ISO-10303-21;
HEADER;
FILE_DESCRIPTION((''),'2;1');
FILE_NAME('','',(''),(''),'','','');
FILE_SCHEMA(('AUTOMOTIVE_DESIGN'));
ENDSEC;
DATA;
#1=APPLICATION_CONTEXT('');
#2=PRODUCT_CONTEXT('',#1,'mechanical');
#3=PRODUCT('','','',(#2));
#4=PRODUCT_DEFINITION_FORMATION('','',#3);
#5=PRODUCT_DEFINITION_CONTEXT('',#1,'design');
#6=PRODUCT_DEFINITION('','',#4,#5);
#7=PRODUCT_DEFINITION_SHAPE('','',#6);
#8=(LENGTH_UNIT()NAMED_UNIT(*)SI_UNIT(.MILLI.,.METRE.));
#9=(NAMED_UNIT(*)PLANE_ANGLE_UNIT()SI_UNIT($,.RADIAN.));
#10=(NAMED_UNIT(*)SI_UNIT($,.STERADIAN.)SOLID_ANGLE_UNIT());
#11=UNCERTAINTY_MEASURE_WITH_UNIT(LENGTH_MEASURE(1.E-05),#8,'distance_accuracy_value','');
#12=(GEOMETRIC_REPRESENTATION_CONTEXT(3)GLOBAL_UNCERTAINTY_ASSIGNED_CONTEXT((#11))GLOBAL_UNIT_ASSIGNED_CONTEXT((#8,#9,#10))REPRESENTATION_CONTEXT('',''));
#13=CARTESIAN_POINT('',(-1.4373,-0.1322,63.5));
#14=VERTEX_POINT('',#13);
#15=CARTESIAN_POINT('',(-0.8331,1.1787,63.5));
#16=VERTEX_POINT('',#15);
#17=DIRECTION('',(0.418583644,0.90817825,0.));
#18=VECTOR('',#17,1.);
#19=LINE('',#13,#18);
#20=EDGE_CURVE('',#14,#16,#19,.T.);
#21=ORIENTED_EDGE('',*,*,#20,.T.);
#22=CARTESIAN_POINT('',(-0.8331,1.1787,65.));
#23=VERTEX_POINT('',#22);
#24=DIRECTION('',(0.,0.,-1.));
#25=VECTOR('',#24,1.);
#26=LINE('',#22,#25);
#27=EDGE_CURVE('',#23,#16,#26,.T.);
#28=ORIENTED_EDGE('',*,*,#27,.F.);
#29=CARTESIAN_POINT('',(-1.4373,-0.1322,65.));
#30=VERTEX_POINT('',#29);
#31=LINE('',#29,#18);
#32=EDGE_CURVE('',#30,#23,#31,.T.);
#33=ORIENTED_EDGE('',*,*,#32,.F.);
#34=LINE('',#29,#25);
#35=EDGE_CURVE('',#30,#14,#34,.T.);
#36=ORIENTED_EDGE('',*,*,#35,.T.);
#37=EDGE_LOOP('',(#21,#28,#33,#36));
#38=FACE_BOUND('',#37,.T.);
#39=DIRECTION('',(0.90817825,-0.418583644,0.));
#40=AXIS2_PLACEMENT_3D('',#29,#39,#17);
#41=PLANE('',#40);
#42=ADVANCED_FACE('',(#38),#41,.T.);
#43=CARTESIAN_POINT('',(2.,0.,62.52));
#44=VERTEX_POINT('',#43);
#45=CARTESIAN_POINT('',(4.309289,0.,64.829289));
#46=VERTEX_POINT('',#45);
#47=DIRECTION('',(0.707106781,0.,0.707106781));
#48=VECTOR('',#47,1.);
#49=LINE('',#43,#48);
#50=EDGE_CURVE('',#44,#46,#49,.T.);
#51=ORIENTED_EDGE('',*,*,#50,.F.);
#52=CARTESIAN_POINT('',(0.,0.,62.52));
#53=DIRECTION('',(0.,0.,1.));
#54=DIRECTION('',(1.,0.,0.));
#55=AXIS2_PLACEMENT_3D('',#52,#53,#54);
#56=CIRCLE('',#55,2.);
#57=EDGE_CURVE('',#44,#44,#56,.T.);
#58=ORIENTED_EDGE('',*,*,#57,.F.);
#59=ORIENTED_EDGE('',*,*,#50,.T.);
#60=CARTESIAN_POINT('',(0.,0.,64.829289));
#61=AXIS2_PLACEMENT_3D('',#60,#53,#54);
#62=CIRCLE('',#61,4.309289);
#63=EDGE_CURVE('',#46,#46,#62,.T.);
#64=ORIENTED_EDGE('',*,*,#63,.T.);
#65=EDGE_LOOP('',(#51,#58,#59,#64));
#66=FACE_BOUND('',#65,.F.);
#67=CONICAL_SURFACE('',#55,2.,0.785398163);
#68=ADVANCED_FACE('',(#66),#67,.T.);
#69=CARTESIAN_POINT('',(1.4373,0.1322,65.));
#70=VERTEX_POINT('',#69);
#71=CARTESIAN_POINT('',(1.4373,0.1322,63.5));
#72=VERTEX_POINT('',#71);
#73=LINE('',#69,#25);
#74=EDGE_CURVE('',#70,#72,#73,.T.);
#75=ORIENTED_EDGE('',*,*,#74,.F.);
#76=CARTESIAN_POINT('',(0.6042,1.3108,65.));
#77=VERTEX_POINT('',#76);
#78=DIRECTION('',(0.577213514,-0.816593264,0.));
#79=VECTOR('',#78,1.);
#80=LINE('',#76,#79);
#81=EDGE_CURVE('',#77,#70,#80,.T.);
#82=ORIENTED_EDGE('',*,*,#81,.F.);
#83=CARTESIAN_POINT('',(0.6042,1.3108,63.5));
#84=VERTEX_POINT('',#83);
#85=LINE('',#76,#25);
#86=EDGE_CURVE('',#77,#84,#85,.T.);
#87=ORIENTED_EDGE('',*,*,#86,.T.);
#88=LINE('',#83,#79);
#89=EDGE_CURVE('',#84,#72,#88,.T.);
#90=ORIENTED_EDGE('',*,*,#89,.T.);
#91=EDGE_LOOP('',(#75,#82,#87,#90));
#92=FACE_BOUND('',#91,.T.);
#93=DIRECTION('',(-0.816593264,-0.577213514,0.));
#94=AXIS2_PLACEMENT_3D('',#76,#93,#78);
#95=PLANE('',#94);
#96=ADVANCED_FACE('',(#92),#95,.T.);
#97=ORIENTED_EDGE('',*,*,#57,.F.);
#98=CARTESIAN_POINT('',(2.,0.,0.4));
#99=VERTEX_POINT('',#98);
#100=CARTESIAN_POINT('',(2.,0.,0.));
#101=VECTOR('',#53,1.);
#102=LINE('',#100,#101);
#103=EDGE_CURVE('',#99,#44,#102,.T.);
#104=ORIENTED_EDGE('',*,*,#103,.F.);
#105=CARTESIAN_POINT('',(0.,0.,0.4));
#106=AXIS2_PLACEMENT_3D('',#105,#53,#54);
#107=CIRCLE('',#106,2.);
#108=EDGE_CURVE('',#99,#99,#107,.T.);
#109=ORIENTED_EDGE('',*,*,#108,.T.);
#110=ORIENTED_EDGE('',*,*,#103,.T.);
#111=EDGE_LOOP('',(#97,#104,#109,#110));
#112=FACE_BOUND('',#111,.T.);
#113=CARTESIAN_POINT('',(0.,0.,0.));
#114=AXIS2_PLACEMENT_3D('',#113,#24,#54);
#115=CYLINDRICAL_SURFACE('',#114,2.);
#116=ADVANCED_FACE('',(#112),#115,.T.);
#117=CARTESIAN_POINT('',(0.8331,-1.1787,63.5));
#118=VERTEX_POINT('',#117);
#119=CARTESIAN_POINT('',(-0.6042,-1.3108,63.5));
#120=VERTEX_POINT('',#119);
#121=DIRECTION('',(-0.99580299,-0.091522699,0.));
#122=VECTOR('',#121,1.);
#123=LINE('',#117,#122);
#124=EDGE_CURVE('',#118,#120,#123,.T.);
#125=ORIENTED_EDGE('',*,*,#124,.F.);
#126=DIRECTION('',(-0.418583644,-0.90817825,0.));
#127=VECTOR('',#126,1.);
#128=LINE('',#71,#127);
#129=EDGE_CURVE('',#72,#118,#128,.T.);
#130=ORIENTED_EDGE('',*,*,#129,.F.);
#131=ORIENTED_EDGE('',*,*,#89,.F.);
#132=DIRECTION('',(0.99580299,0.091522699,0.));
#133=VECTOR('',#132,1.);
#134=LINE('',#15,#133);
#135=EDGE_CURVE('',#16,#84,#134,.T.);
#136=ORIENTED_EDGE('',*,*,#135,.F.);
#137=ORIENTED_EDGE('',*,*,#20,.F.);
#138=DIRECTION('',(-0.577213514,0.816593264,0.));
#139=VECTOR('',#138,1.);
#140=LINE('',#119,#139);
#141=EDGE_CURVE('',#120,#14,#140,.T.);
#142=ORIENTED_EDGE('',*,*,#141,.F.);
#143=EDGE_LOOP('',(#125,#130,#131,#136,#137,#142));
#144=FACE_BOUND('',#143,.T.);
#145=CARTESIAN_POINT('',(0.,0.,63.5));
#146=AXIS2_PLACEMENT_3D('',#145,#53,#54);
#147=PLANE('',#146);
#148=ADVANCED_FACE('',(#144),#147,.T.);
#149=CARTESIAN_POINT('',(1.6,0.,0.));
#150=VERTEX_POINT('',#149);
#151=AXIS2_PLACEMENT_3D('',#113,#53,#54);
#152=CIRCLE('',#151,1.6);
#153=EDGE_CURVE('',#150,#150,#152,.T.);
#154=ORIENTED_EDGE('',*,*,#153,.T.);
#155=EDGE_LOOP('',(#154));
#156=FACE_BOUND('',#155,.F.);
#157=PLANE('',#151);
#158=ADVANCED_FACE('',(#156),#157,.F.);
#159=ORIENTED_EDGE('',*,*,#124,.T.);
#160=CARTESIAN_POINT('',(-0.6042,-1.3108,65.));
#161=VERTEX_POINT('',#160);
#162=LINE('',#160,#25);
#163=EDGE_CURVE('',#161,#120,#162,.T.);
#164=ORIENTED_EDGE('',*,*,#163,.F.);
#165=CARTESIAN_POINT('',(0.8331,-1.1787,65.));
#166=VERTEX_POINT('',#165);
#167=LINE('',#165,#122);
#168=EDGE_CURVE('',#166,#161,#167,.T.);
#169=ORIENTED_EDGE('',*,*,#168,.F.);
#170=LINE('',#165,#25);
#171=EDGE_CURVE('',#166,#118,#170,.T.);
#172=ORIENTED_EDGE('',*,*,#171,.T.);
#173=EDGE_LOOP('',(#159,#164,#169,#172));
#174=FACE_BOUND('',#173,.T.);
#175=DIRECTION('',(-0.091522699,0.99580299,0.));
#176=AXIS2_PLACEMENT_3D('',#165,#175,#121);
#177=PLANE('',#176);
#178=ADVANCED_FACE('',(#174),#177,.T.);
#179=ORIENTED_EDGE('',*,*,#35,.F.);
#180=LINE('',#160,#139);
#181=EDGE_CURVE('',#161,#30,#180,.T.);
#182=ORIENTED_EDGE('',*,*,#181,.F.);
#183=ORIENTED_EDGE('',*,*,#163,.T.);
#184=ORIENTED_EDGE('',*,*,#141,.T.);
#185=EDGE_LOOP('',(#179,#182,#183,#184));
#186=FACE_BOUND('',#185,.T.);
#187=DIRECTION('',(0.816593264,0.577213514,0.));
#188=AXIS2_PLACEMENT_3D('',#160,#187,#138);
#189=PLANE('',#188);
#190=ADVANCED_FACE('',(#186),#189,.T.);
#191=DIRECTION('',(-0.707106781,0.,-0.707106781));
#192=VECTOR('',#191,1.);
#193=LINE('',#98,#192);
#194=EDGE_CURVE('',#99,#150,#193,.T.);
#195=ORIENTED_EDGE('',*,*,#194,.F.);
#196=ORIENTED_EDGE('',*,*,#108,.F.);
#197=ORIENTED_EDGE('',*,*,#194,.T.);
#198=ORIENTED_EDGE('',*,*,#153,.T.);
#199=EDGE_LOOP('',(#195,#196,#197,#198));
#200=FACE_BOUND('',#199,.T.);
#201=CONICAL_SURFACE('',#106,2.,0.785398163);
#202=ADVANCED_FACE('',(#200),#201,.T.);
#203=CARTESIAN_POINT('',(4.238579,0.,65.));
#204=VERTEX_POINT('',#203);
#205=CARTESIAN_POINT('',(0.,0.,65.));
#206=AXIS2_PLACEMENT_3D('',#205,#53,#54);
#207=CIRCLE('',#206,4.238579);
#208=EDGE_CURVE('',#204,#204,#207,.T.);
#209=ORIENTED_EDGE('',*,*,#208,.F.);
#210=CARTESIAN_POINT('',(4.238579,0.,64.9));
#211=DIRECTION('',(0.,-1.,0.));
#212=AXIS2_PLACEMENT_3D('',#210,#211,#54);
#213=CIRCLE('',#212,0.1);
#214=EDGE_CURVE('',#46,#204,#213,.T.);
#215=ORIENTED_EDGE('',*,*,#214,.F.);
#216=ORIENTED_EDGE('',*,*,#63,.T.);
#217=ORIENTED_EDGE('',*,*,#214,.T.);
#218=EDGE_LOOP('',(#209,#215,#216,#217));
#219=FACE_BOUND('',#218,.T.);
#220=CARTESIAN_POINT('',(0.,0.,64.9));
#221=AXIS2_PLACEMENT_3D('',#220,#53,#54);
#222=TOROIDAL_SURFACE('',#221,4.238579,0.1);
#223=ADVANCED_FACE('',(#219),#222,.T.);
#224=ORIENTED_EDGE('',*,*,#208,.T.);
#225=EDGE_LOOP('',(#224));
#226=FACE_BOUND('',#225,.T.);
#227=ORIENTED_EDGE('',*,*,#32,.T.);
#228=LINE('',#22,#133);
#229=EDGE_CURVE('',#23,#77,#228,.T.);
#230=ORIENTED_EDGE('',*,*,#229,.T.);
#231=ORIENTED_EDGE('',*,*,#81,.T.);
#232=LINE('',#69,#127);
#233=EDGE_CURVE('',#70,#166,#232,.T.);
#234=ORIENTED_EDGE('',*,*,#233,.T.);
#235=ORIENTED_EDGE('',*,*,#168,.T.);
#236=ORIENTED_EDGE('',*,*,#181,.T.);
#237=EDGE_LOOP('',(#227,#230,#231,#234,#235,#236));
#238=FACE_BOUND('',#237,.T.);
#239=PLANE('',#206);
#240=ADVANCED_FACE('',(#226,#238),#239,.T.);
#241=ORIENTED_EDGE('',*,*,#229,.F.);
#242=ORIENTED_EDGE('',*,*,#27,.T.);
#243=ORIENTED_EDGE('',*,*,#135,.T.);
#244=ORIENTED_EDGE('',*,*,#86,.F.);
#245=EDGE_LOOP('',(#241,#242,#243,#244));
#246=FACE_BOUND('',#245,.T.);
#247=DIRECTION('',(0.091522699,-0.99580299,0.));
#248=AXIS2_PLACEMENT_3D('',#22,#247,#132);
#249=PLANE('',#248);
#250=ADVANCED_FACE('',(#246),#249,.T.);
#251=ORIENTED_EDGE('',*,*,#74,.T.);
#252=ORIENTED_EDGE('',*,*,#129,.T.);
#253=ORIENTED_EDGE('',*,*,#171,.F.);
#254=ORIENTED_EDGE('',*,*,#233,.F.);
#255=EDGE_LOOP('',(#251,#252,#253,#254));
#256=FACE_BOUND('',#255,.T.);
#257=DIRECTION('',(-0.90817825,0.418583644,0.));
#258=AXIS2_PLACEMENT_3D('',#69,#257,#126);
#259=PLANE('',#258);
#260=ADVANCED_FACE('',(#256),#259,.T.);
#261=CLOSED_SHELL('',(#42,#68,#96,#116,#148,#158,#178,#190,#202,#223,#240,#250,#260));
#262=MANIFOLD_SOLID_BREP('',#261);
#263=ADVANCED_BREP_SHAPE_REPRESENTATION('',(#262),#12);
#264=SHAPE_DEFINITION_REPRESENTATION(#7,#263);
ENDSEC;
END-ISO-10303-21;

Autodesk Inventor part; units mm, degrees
ref_plane "YZ Plane" through (0, 0, 0) normal (1, 0, 0) x (0, 1, 0)
ref_plane "XZ Plane" through (0, 0, 0) normal (0, 1, 0) x (-1, 0, 0)
ref_plane "XY Plane" through (0, 0, 0) normal (0, 0, 1) x (1, 0, 0)
sketch "Sketch1" plane through (0, 0, 0) normal (0, 0, 1) x (1, 0, 0)
  circle A0 centre (0, 0) radius 2
  dimension "Diameter" = 4
extrude "Extrusion1" add sketch "Sketch1" along normal blind 62.52
sketch "Sketch2" plane through (0, 0, 62.52) normal (0, 0, 1) x (1, 0, 0)
  circle A0 centre (0, 0) radius 2 projected
extrude "Extrusion2" add sketch "Sketch2" along normal blind 2.48 draft 45
sketch "Sketch3" plane through (0, 0, 65) normal (0, 0, 1) x (1, 0, 0)
  circle A0 centre (0, 0) radius 4.48 projected
  circle A1 centre (0, 0) radius 1.4434 construction
  line L0 (0.6042, 1.3108) -> (1.4373, 0.1322)
  line L1 (1.4373, 0.1322) -> (0.8331, -1.1787)
  line L2 (0.8331, -1.1787) -> (-0.6042, -1.3108)
  line L3 (-0.6042, -1.3108) -> (-1.4373, -0.1322)
  line L4 (-1.4373, -0.1322) -> (-0.8331, 1.1787)
  line L5 (-0.8331, 1.1787) -> (0.6042, 1.3108)
  dimension "Hex_Width" = 2.5
extrude "Extrusion3" cut sketch "Sketch3" against normal blind 1.5 contours L0 L1 L2 L3 L4 L5
chamfer "Chamfer2" distance 0.4 angle 45 1 edges at (-2, 0, 0)
fillet "Fillet1" radius 0.1 1 edges at (-4.48, 0, 65)
thread "Thread2" size "M4x0.7" class "6g" standard "ANSI Metric M Profile" length 30
equation "\"d13\" = Chamfer"
equation "\"Thread_Length\" = 7.52"
equation "\"Chamfer\" = 0.4"
properties part number "SCREW, FLAT HD, P, 12_9, M4X0_7X65MM" material "Steel"
